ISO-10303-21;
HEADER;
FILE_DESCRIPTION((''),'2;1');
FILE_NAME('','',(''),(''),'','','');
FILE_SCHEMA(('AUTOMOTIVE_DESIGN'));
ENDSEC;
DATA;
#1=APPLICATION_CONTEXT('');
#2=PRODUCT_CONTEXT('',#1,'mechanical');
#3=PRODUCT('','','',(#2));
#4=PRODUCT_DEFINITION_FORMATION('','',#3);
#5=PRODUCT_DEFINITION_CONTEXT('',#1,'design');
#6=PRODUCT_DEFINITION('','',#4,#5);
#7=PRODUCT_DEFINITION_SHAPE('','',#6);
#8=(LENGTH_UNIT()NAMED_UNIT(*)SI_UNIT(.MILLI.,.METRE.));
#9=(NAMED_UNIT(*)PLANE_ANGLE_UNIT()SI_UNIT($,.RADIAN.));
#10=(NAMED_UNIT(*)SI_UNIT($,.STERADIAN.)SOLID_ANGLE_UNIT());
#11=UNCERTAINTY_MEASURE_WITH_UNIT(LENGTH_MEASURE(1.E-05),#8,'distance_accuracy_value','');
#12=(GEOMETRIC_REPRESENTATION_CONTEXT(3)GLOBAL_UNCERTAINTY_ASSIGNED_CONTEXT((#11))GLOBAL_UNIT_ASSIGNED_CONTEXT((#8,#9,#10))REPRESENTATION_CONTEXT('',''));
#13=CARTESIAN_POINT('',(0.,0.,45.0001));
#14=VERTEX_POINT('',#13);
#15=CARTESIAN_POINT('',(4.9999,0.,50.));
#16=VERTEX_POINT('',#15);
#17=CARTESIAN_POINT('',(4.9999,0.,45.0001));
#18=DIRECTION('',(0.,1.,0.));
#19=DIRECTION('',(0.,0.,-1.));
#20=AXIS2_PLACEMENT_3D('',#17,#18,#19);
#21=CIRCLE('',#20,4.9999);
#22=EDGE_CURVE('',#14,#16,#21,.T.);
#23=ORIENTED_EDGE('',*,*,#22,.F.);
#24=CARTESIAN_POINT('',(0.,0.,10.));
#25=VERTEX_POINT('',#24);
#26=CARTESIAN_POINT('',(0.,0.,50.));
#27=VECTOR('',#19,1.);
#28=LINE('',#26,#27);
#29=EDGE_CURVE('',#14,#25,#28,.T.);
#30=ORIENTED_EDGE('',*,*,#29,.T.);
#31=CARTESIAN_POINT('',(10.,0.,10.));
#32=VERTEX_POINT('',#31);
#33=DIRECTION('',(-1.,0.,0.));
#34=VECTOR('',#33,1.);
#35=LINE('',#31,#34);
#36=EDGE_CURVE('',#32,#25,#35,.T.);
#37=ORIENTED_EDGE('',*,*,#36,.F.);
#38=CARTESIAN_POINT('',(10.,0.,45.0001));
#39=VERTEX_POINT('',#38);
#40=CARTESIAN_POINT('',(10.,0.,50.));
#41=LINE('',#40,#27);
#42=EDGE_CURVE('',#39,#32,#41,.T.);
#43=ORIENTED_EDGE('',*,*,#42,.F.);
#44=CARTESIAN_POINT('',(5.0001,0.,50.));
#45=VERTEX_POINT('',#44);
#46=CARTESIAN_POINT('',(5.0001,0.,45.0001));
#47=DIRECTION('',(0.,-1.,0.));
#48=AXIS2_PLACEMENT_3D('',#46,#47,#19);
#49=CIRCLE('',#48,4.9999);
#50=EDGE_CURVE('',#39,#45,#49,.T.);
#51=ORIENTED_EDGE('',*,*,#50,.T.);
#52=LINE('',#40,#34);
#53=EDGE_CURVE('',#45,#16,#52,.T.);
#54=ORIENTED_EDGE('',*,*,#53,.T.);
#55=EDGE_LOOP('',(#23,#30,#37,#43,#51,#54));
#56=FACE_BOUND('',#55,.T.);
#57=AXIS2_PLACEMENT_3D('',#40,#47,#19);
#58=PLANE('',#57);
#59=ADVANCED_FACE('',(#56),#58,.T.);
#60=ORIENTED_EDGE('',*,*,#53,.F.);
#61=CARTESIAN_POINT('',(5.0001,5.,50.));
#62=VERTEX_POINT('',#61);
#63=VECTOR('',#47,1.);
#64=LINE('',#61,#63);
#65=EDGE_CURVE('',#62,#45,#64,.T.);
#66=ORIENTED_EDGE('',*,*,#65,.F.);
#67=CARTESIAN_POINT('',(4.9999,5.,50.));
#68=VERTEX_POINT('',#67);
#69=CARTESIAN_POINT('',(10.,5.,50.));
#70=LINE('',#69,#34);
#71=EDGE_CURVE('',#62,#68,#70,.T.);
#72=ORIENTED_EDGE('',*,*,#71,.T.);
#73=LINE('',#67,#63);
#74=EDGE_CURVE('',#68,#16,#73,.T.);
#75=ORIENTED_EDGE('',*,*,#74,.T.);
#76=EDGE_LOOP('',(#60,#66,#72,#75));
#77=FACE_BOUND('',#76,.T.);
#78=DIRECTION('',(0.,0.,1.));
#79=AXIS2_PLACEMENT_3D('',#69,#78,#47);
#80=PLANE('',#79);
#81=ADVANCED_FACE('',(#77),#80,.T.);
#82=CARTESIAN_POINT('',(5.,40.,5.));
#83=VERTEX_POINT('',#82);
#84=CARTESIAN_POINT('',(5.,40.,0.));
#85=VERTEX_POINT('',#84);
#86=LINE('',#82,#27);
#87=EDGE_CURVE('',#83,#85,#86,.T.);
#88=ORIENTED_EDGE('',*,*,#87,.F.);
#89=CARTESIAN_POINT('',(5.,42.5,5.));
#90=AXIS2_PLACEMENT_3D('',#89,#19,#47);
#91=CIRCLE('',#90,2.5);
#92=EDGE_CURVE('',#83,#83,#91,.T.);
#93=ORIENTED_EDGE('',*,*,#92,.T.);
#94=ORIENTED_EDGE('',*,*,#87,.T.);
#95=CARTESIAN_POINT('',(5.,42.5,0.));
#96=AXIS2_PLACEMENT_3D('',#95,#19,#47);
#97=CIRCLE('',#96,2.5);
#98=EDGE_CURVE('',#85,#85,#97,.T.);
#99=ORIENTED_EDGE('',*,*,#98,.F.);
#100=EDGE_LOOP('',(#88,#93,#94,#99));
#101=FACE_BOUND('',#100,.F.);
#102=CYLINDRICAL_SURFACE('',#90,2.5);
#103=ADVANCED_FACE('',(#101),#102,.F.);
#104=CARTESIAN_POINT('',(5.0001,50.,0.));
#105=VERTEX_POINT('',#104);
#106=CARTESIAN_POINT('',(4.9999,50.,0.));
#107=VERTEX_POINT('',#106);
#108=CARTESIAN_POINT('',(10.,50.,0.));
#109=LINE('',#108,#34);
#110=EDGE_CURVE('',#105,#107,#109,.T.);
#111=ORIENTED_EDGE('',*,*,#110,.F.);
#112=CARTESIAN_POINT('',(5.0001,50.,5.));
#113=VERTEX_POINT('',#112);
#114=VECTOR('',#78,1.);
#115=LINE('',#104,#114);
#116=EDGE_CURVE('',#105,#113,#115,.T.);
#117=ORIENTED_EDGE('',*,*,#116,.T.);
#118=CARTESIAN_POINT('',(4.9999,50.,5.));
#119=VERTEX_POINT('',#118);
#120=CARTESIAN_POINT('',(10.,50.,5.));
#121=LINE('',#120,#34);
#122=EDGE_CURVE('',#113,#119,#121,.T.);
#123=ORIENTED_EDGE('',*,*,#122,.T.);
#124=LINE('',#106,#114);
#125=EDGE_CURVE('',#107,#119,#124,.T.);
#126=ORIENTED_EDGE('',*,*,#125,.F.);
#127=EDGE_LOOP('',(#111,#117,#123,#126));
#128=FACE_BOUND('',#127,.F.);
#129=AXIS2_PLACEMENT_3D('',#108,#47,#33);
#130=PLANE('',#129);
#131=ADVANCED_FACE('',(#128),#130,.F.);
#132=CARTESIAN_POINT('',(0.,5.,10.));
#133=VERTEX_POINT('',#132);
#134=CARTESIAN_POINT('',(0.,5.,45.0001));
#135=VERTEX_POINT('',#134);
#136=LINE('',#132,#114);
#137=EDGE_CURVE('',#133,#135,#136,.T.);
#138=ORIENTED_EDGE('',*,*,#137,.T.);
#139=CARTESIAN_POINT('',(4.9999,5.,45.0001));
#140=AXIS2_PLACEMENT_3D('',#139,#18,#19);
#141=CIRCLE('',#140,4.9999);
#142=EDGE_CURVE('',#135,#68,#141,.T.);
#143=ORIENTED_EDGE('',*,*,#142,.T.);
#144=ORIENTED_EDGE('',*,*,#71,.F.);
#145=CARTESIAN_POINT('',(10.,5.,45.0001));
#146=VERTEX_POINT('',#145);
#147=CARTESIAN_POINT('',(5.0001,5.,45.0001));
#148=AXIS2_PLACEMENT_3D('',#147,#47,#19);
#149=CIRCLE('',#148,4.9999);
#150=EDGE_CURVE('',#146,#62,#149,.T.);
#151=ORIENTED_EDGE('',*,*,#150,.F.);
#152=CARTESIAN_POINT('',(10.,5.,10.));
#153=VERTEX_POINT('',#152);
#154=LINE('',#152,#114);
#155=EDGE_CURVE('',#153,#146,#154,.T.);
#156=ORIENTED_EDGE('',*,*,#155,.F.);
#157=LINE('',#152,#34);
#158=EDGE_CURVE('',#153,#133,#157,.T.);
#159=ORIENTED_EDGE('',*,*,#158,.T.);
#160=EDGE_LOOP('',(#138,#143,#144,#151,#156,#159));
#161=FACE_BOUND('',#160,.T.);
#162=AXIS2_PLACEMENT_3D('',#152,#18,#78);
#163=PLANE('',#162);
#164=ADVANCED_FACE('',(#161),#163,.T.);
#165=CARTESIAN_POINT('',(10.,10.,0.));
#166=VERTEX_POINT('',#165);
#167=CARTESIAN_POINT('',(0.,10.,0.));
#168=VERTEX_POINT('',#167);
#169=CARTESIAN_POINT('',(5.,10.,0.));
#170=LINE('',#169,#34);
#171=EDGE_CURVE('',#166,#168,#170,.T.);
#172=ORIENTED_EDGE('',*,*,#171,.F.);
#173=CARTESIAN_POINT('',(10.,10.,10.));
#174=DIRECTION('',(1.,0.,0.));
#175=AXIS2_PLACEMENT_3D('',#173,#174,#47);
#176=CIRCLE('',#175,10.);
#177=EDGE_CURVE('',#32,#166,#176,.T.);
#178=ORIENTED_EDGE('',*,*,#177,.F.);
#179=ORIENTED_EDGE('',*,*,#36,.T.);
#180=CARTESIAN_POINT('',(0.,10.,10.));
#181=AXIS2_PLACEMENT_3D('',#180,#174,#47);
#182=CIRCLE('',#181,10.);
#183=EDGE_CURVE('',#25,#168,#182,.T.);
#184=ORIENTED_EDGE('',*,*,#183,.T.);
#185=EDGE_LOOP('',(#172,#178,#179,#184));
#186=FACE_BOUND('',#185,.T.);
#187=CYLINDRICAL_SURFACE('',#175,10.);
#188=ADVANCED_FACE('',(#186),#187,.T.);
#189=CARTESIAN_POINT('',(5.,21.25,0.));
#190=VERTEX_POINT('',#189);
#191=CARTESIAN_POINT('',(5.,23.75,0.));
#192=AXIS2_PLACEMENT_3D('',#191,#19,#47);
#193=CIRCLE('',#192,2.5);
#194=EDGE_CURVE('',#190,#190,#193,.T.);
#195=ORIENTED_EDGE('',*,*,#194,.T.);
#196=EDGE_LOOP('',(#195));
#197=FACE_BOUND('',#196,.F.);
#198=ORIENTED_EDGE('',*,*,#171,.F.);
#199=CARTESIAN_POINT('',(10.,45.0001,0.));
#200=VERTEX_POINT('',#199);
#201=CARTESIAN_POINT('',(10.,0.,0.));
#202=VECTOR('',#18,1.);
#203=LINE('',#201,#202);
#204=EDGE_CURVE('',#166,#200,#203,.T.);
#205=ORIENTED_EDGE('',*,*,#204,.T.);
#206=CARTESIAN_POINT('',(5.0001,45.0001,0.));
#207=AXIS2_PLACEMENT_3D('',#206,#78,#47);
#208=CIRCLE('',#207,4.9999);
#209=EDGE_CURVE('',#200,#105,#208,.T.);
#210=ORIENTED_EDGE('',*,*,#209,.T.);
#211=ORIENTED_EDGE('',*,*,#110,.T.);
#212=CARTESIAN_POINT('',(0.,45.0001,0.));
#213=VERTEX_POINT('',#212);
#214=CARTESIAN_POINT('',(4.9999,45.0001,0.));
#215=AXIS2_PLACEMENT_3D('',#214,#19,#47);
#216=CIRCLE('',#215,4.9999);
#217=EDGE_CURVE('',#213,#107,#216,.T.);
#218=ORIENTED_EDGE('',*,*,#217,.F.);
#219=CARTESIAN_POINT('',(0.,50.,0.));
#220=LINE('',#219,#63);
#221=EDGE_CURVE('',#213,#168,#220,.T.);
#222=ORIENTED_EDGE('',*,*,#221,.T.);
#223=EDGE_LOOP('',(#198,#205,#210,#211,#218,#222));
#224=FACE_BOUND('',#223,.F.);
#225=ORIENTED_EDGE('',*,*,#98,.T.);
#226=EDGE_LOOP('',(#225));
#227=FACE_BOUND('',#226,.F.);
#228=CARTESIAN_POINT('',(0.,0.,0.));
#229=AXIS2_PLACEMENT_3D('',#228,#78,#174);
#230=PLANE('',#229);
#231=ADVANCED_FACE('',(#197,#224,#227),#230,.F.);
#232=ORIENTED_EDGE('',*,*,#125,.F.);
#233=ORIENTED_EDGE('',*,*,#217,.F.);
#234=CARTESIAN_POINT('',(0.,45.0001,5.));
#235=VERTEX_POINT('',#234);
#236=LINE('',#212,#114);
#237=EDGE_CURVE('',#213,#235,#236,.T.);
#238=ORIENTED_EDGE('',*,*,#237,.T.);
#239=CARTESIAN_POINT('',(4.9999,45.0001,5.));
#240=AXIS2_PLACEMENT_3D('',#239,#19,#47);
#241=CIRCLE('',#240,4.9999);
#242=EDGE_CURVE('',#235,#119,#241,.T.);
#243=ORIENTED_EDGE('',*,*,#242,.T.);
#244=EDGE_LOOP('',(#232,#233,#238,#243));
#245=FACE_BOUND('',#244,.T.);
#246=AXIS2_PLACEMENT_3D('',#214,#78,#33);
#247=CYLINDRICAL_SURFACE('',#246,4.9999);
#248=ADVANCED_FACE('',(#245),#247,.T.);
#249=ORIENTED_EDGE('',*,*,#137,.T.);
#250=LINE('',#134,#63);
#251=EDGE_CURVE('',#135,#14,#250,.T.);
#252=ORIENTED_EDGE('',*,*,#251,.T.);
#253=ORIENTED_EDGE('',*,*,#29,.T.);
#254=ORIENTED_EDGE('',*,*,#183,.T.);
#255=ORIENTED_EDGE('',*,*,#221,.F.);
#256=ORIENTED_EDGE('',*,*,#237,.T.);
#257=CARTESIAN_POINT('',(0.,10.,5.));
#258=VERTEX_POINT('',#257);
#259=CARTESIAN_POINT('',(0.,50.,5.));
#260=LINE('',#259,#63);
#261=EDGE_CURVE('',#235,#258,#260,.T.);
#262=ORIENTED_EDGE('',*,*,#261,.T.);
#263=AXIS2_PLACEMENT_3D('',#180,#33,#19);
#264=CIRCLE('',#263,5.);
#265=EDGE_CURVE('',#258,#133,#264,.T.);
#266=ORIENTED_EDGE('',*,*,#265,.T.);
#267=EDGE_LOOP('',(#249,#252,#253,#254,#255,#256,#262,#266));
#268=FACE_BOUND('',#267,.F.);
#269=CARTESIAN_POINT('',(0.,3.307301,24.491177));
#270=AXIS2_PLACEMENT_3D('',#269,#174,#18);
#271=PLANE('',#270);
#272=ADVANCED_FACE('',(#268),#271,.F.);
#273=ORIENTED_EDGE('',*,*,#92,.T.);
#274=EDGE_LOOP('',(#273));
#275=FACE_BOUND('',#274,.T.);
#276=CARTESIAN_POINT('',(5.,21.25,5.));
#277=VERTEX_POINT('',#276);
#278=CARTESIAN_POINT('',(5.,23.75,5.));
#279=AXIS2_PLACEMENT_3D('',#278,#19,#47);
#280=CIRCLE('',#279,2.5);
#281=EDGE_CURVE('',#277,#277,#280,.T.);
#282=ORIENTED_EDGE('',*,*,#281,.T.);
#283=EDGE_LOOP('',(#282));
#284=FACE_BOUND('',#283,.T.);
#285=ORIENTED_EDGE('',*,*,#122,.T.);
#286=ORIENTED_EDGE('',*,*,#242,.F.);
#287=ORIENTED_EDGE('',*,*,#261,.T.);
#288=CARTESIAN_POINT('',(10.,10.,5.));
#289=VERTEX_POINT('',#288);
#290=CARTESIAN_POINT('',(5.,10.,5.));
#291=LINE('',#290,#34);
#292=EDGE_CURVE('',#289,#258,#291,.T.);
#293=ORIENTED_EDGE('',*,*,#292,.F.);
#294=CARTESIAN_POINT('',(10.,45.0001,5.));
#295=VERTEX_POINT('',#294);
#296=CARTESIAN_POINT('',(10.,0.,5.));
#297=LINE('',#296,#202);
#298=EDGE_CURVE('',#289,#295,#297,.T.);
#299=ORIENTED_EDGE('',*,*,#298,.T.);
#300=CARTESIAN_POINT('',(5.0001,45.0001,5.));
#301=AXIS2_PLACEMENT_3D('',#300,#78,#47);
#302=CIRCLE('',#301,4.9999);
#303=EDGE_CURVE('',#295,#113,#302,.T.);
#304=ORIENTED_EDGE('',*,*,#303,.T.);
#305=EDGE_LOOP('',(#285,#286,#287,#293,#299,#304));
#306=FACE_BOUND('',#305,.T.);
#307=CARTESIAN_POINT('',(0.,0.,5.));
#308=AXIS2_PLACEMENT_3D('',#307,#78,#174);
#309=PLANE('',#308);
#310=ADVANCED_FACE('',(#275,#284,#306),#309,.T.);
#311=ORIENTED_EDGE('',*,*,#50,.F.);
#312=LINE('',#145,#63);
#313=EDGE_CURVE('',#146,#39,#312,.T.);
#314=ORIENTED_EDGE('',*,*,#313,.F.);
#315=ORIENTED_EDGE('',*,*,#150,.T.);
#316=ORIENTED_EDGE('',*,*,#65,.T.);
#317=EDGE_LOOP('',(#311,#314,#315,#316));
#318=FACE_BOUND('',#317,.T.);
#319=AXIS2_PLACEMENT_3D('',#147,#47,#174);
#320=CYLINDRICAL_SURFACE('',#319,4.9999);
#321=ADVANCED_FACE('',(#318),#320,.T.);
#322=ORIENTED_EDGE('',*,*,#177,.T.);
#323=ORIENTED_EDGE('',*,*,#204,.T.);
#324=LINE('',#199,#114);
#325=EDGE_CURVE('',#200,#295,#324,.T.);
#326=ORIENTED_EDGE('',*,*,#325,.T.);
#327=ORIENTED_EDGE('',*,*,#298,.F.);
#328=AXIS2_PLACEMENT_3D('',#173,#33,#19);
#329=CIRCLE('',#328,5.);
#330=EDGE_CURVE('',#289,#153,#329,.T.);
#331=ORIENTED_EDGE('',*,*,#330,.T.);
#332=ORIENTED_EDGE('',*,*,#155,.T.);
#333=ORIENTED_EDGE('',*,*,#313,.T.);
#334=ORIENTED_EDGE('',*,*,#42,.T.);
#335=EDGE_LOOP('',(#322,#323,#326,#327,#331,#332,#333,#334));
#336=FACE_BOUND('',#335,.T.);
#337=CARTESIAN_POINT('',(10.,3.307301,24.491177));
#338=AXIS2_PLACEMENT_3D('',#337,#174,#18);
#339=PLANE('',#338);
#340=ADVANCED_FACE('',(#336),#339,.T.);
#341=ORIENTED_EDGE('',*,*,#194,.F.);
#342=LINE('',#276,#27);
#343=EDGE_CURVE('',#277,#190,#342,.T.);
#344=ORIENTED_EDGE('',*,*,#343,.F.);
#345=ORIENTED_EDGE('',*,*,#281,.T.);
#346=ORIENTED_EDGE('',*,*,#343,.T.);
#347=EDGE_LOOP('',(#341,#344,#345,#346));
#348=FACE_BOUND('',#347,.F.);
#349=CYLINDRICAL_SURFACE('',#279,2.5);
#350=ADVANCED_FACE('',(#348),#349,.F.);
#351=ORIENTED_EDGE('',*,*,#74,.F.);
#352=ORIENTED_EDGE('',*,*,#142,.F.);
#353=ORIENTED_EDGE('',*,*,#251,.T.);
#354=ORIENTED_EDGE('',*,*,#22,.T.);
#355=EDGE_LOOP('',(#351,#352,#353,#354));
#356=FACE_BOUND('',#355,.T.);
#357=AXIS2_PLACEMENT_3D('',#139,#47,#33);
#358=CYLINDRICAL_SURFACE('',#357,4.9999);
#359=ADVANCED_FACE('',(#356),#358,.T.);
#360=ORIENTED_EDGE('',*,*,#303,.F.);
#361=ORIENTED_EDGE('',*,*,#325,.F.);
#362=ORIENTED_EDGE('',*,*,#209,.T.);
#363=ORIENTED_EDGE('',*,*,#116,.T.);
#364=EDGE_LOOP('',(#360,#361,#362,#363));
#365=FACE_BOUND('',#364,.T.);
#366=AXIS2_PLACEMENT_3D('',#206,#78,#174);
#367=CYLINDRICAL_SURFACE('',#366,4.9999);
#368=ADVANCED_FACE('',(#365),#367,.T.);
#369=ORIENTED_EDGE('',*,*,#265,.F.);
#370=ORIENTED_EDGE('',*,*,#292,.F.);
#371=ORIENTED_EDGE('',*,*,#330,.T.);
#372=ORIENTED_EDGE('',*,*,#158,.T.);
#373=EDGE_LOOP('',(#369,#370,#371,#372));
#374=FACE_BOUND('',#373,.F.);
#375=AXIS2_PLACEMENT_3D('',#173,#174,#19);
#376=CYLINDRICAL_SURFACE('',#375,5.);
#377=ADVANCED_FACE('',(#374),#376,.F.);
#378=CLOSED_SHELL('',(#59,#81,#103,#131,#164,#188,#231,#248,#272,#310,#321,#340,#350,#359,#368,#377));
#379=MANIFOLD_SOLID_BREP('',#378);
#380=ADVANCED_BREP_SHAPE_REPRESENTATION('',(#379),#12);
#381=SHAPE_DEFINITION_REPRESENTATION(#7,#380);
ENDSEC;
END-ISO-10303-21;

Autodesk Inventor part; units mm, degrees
ref_plane "YZ Plane" through (0, 0, 0) normal (1, 0, 0) x (0, 1, 0)
ref_plane "XZ Plane" through (0, 0, 0) normal (0, 1, 0) x (-1, 0, 0)
ref_plane "XY Plane" through (0, 0, 0) normal (0, 0, 1) x (1, 0, 0)
sketch "Szkic1" plane through (0, 0, 0) normal (0, 0, 1) x (1, 0, 0)
  line L0 (0, 0) -> (10, 0)
  line L1 (10, 0) -> (10, 50)
  line L2 (10, 50) -> (0, 50)
  line L3 (0, 50) -> (0, 0)
  dimension "d0" = 50
  dimension "d1" = 10
extrude "Płyta1" add sketch "Szkic1" along normal blind 5
sketch "Szkic3" plane through (10, 5, 0) normal (0, -1, 0) x (1, 0, 0)
  line L0 (-10, 0) -> (0, 0)
  line L1 (0, 0) -> (0, 50)
  line L2 (0, 50) -> (-10, 50)
  line L3 (-10, 50) -> (-10, 0)
edge flange "Kołnierz1" height 50 angle 90 thickness 5 bend radius 5 thickness toward (0, -1, 0) relief tear relief width 5 relief depth 2.5 edges at (5, 0, 5) wall of the first edge with corners at (0, 5, 0) (10, 5, 0) (10, 5, 50) (0, 5, 50)
bend "Gięcie1"
corner "Narożnik1"
sketch "Szkic2" plane through (0, 0, 5) normal (0, 0, 1) x (1, 0, 0)
  line L0 (0, 0) -> (0, 50) construction
  line L1 (10, 50) -> (10, 0) construction
  arc A0 (10, 45) -> (0, 45) centre (5, 45) ccw
  line L2 (5, 23.75) -> (5.65, 23.75) construction
  point P0 (5, 42.5)
  point P1 (5, 5)
  point P2 (0, 5)
  point P3 (10, 5)
  dimension "d5" = 5
  dimension "d6" = 5
  dimension "d7" = 2.5
hole "Otwór4" at (5, 42.5, 5) at (5, 23.75, 5) direction (0, 0, -1) diameter 5 end through all
fillet "Zaokrąglenie2" radius 5 4 edges at (0, 2.5, 50) (10, 2.5, 50) (10, 50, 2.5) (0, 50, 2.5)
equation "\"d45\" = Grubość"
equation "\"d23\" = SzerokośćGięciaPodcięcia"
equation "\"d24\" = GłębokośćGięciaPodcięcia"
equation "\"d25\" = MinimalnaPozostałość"
equation "\"d26\" = PromieńGięcia"
equation "\"d29\" = PromieńGięcia"
equation "\"d30\" = RozmiarPodcięciaNarożnika"
equation "\"d31\" = Wielk_odstępu"
equation "\"d32\" = Rozmiar_promienia_Jacobiego"
equation "\"PromieńGięcia\" = Grubość"
equation "\"SzerokośćGięciaPodcięcia\" = Grubość"
equation "\"GłębokośćGięciaPodcięcia\" = 0.5 * Grubość"
equation "\"PromieńPrzejścia\" = PromieńGięcia"
equation "\"Rozmiar_promienia_Jacobiego\" = PromieńGięcia"
equation "\"Wielk_odstępu\" = Grubość"
equation "\"d2\" = PromieńGięcia"
equation "\"Grubość\" = 5"
equation "\"MinimalnaPozostałość\" = 10"
equation "\"RozmiarPodcięciaNarożnika\" = 20"
properties part number "Pręt_łączący" material "Stal nierdzewna"
